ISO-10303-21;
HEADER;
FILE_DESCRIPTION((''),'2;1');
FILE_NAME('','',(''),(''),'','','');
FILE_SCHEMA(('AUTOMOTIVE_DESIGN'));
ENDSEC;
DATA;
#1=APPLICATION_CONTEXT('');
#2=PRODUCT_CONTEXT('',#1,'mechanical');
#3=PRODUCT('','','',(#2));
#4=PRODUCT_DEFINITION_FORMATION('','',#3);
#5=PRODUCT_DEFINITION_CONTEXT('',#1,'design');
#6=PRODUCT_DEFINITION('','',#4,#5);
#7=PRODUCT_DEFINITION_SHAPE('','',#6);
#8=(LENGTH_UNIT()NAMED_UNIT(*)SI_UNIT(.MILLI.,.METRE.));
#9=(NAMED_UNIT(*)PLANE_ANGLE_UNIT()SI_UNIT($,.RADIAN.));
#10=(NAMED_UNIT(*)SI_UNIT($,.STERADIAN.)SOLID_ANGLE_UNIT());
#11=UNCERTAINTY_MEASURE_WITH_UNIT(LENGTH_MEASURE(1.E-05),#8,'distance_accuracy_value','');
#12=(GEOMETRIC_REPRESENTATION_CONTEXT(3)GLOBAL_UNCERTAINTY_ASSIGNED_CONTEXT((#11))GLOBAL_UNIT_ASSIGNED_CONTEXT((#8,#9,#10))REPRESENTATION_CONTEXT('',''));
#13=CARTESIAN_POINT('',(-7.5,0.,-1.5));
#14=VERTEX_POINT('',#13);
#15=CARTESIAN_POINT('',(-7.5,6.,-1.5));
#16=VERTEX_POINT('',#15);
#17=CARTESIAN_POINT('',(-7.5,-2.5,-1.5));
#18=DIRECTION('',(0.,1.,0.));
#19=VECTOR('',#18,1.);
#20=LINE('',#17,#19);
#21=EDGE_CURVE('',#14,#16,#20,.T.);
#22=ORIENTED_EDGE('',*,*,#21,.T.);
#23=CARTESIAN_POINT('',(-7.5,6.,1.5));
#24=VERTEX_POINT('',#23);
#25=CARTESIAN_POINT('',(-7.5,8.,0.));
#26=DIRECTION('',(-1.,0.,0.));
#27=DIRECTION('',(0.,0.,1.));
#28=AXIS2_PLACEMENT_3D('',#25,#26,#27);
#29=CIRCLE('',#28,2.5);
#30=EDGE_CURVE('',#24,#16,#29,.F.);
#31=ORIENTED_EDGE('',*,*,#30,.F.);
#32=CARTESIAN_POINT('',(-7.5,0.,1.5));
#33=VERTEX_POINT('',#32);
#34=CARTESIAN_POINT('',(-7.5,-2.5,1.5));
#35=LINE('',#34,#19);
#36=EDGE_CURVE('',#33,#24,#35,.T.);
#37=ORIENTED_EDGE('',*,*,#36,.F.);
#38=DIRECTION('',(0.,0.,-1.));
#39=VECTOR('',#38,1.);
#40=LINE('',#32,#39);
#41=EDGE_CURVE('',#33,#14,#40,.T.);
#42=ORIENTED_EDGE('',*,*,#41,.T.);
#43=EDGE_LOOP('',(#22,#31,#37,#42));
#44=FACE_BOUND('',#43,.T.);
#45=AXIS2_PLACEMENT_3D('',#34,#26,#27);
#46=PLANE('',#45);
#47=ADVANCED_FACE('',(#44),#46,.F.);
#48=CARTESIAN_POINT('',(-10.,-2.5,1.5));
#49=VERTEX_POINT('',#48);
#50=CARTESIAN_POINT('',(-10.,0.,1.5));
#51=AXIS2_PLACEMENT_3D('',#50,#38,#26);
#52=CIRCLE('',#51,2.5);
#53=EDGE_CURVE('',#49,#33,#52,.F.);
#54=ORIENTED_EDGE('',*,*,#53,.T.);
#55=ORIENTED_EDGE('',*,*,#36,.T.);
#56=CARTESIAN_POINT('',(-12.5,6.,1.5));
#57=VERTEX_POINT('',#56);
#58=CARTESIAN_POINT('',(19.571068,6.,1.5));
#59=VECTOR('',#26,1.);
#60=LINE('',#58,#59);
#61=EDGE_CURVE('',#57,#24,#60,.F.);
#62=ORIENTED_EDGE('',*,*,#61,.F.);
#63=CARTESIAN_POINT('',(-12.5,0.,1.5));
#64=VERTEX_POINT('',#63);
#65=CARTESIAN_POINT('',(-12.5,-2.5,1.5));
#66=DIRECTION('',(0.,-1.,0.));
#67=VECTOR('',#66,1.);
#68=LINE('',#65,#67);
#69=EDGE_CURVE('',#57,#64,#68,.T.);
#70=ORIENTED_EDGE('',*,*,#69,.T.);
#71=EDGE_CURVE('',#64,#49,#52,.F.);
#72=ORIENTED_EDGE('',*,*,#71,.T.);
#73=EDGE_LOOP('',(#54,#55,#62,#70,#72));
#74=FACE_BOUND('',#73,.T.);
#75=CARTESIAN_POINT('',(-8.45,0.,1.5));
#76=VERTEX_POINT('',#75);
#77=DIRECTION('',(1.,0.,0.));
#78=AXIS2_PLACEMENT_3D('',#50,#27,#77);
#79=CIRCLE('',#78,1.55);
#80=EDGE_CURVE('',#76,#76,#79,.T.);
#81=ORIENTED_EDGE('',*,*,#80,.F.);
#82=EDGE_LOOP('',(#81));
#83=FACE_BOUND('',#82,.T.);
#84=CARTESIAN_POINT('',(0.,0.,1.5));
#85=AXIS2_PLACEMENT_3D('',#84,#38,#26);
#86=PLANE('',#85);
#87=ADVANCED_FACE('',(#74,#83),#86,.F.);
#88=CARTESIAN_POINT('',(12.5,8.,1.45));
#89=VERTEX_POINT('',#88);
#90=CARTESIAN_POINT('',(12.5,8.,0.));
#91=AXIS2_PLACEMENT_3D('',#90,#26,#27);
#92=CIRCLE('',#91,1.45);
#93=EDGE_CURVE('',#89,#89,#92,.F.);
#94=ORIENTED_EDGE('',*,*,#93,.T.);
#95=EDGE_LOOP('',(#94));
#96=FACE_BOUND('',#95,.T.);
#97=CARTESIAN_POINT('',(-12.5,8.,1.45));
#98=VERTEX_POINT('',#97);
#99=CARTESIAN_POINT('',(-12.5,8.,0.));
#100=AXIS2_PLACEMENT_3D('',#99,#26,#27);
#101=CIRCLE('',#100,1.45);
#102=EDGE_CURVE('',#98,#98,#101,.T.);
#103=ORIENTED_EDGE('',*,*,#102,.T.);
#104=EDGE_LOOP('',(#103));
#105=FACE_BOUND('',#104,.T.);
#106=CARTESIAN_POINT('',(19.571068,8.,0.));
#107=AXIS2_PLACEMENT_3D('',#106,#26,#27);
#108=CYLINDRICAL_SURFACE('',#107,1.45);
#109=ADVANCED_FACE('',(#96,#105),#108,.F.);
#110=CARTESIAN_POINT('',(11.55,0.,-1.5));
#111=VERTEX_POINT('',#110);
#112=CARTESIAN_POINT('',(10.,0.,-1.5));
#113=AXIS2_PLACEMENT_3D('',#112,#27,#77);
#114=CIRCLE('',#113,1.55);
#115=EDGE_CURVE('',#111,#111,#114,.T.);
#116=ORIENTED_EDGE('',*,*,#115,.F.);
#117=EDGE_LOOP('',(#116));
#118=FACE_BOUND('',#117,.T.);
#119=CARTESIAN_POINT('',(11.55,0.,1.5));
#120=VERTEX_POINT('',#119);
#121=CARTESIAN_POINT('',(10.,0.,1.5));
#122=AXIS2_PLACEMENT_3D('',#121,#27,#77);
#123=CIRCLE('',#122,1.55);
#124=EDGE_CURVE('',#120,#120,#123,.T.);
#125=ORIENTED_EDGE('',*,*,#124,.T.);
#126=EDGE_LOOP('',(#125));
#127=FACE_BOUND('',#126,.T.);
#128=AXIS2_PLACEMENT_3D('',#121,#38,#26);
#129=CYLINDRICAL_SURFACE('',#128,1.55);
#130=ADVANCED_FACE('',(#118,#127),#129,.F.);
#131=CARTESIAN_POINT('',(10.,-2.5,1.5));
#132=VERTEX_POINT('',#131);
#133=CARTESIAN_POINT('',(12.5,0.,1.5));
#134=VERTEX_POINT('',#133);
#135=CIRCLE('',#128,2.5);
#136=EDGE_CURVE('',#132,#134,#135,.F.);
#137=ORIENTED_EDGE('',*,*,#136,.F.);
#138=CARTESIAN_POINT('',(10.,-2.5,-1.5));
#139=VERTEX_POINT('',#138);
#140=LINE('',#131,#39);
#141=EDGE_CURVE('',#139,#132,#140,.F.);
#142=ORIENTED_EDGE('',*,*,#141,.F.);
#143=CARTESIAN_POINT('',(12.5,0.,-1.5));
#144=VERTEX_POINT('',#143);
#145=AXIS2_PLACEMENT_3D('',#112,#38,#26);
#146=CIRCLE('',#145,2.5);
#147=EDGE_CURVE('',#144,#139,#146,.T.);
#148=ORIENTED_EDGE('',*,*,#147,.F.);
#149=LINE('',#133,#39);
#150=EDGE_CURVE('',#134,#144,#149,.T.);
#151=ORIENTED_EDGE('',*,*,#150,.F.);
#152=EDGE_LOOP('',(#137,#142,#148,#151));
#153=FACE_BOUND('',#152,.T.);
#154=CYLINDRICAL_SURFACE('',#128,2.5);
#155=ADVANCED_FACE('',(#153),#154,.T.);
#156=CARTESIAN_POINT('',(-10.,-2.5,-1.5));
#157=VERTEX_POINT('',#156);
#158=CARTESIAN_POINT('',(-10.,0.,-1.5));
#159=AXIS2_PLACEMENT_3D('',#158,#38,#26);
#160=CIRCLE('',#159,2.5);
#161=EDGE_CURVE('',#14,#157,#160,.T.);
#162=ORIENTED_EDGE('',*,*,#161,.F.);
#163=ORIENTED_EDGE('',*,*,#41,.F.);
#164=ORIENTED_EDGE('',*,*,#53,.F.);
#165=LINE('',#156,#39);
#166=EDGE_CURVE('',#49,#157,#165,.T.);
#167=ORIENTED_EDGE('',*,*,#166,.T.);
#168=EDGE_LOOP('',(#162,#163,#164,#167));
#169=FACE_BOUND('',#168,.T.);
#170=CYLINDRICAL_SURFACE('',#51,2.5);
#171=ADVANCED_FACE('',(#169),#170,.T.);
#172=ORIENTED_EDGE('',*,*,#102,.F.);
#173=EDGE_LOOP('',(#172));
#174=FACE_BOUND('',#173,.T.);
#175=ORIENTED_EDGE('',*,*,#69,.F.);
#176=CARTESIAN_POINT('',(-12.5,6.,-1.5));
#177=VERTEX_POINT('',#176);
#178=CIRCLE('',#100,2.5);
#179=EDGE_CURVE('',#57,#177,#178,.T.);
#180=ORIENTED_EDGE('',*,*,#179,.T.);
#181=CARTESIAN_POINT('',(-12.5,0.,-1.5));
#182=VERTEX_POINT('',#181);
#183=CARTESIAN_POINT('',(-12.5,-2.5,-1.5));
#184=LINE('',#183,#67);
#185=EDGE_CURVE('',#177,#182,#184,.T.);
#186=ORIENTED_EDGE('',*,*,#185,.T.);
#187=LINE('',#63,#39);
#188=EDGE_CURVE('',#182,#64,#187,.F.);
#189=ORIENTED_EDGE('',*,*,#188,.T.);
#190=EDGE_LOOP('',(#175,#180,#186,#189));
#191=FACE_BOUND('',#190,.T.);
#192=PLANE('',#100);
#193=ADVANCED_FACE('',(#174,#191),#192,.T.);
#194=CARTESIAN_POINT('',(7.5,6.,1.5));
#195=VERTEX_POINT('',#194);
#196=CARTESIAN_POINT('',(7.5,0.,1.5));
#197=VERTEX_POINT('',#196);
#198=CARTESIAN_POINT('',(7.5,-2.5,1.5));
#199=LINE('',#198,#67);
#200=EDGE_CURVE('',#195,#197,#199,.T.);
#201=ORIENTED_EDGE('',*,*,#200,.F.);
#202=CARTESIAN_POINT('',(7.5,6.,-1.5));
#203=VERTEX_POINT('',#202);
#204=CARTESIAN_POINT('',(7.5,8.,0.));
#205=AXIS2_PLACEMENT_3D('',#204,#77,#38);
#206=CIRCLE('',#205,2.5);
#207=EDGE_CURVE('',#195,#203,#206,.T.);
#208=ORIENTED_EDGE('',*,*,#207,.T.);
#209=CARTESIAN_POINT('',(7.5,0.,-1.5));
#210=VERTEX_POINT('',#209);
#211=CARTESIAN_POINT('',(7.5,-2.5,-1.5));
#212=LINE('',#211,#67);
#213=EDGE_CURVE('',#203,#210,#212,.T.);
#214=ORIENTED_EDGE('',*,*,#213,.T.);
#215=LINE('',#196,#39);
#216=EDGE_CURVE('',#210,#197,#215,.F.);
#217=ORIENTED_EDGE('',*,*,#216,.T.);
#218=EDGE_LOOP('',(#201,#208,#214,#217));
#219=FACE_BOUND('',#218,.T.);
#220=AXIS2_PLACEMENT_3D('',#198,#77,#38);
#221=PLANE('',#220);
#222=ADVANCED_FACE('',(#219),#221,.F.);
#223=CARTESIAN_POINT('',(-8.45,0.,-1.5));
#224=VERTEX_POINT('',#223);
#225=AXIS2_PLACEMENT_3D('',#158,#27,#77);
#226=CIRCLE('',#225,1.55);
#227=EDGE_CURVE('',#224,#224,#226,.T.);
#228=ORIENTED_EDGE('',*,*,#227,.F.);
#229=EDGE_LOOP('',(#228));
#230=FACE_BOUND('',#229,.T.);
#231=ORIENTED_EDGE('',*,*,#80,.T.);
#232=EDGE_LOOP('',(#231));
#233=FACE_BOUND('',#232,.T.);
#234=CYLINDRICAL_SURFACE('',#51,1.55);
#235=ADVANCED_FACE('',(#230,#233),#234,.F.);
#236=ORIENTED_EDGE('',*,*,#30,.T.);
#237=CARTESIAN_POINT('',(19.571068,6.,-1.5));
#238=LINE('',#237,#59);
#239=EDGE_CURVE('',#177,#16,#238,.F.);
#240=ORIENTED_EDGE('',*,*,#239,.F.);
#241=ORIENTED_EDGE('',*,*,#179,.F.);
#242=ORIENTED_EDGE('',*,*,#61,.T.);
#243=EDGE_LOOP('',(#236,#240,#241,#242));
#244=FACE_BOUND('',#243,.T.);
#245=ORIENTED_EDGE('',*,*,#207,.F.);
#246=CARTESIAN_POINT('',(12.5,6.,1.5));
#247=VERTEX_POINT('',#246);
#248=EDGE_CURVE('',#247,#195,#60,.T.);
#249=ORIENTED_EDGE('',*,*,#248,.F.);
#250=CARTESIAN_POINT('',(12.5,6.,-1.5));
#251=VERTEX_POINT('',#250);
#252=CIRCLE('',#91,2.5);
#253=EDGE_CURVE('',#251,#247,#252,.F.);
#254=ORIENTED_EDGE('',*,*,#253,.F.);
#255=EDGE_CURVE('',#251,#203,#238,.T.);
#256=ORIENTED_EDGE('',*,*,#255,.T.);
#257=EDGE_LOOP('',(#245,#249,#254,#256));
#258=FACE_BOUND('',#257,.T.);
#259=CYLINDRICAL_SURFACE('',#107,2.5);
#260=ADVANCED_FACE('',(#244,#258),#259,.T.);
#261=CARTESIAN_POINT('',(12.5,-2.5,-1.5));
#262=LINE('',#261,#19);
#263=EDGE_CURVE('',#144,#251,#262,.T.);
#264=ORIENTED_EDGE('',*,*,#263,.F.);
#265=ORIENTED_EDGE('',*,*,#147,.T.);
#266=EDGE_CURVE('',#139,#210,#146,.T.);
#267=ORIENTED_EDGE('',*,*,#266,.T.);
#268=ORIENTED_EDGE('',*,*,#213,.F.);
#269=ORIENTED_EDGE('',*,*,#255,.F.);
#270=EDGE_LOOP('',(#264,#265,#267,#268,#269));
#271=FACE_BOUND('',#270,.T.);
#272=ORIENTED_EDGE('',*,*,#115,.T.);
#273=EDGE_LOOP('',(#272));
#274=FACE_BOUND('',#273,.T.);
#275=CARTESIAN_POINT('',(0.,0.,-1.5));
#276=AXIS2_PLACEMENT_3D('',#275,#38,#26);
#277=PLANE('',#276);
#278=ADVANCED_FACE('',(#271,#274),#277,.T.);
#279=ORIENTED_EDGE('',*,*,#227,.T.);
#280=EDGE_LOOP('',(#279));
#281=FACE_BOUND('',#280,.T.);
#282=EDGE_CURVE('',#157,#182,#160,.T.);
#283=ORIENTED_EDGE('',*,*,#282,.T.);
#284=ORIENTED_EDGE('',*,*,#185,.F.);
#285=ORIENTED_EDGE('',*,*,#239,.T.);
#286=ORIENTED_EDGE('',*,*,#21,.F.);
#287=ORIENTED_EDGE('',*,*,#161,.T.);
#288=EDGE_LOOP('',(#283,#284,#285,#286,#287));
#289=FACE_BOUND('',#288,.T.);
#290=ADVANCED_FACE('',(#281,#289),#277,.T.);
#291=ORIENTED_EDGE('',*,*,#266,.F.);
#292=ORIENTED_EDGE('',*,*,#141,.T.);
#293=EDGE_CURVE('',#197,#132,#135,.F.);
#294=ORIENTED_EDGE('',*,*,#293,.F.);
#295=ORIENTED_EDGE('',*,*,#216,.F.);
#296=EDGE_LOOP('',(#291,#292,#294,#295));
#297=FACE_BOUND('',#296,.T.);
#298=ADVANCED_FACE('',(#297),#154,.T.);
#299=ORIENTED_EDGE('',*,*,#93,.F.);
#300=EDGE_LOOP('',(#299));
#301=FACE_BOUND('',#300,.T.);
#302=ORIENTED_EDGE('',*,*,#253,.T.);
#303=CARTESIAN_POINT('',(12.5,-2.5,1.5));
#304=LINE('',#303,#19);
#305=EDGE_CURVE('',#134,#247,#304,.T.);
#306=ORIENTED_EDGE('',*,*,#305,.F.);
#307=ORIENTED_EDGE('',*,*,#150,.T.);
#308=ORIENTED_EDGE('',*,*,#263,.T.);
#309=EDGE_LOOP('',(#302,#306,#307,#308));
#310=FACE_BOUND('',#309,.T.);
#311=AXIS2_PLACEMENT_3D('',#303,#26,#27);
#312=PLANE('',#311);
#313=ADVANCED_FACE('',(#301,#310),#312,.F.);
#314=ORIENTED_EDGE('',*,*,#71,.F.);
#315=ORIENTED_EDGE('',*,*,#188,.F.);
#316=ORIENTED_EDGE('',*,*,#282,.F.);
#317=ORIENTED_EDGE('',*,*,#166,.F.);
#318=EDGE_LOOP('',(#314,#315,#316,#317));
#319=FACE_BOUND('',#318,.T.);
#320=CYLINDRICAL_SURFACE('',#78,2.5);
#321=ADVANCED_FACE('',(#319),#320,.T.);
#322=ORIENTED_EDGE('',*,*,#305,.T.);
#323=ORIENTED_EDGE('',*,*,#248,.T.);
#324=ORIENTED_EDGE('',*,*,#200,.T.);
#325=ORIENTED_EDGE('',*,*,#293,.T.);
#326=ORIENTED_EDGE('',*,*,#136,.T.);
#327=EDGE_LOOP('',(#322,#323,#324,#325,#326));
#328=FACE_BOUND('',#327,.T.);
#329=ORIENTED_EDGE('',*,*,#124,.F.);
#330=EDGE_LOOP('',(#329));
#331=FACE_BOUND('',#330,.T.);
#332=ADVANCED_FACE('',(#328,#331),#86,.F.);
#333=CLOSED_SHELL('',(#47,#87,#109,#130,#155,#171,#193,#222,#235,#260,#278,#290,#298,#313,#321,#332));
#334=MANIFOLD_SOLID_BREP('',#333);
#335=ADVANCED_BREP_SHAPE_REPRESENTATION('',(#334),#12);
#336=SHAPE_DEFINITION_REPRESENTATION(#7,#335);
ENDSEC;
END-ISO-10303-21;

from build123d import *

# Parameters (mm, degrees)
SKETCH1_R             = 1.5500000000000012
BOSS_EXTRUDE1_DEPTH   = 1.5
SKETCH1_W             = 4.999999999999998
SKETCH1_H             = 10.5
BOSS_EXTRUDE1_2_DEPTH = 1.5
BOSS_EXTRUDE2_REACH   = 28.292
SKETCH2_R             = 2.500000000000001
SKETCH2_R_2           = 1.45
CUT_EXTRUDE1_DEPTH    = 25
FILLET1_R             = 2.5


with BuildPart() as part:
    # Sketch1 → Boss-Extrude1 (new, symmetric)
    with BuildSketch(Plane.XY):
        Polygon((-12.499999999999993, -2.4999999999999996), (-7.499999999999993, -2.5), (-7.499999999999993, 8), (-12.499999999999993, 8), align=None)
        with Locations((-9.999999999999995, 0)):
            Circle(SKETCH1_R, mode=Mode.SUBTRACT)
    extrude(amount=BOSS_EXTRUDE1_DEPTH, both=True)


with BuildPart() as body_2:
    # Sketch1 → Boss-Extrude1 2 (new, symmetric)
    with BuildSketch(Plane.XY):
        with Locations((10.000000000000007, 2.75)):
            Rectangle(SKETCH1_W, SKETCH1_H)
        with Locations((10.000000000000009, 2.45e-15)):
            Circle(SKETCH1_R, mode=Mode.SUBTRACT)
    extrude(amount=BOSS_EXTRUDE1_2_DEPTH, both=True)

    # Boss-Extrude2: up to this face of the body (flat: up to its plane)
    boss_extrude2_end = Plane(body_2.part.faces().sort_by_distance((12.5, 2.75, 0))[0])
    # Sketch2 → Boss-Extrude2 (add, up to the picked face)
    with BuildSketch(Plane.ZY.offset(12.499999999999993), mode=Mode.PRIVATE) as boss_extrude2_sk1:
        with Locations(Location((0, 8, 0), (0, 0, 306.869897646))):
            Circle(SKETCH2_R)
        with Locations((0, 8)):
            Circle(SKETCH2_R_2, mode=Mode.SUBTRACT)
    boss_extrude2_tool1 = split(extrude(boss_extrude2_sk1.sketch, amount=-BOSS_EXTRUDE2_REACH, mode=Mode.PRIVATE), bisect_by=boss_extrude2_end, keep=Keep.BOTH, mode=Mode.PRIVATE)

    add(part.part)  # Boss-Extrude2 merges part
    add(boss_extrude2_tool1.solids().sort_by(Axis((-12.5, 9.943431, -1.457574), (1, 0, 0)))[0])

    # Sketch2<2> → Cut-Extrude1 (cut)
    with BuildSketch(Plane.ZY.offset(12.499999999999993)):
        with BuildLine():
            Line((-1.4500000000000002, 8), (1.45, 8))
            ThreePointArc((1.45, 8), (9e-17, 9.45), (-1.45, 8))
        make_face()
        with BuildLine():
            ThreePointArc((-1.45, 8), (-2.7e-16, 6.55), (1.45, 8))
            Line((1.45, 8), (-1.4500000000000002, 8))
        make_face()
    extrude(amount=-CUT_EXTRUDE1_DEPTH, mode=Mode.SUBTRACT)

    # Fillet1
    fillet1_edges = [body_2.edges().sort_by_distance(p)[0] for p in [
        (7.500000000000007, -2.5, 0),
        (-7.499999999999993, -2.5, 0),
        (-12.499999999999993, -2.4999999999999996, 0),
        (12.500000000000007, -2.5, 0),
    ]]
    fillet(fillet1_edges, radius=FILLET1_R - 0.0001)  # a hair under: the kernel refuses the full size


solid = body_2.part
